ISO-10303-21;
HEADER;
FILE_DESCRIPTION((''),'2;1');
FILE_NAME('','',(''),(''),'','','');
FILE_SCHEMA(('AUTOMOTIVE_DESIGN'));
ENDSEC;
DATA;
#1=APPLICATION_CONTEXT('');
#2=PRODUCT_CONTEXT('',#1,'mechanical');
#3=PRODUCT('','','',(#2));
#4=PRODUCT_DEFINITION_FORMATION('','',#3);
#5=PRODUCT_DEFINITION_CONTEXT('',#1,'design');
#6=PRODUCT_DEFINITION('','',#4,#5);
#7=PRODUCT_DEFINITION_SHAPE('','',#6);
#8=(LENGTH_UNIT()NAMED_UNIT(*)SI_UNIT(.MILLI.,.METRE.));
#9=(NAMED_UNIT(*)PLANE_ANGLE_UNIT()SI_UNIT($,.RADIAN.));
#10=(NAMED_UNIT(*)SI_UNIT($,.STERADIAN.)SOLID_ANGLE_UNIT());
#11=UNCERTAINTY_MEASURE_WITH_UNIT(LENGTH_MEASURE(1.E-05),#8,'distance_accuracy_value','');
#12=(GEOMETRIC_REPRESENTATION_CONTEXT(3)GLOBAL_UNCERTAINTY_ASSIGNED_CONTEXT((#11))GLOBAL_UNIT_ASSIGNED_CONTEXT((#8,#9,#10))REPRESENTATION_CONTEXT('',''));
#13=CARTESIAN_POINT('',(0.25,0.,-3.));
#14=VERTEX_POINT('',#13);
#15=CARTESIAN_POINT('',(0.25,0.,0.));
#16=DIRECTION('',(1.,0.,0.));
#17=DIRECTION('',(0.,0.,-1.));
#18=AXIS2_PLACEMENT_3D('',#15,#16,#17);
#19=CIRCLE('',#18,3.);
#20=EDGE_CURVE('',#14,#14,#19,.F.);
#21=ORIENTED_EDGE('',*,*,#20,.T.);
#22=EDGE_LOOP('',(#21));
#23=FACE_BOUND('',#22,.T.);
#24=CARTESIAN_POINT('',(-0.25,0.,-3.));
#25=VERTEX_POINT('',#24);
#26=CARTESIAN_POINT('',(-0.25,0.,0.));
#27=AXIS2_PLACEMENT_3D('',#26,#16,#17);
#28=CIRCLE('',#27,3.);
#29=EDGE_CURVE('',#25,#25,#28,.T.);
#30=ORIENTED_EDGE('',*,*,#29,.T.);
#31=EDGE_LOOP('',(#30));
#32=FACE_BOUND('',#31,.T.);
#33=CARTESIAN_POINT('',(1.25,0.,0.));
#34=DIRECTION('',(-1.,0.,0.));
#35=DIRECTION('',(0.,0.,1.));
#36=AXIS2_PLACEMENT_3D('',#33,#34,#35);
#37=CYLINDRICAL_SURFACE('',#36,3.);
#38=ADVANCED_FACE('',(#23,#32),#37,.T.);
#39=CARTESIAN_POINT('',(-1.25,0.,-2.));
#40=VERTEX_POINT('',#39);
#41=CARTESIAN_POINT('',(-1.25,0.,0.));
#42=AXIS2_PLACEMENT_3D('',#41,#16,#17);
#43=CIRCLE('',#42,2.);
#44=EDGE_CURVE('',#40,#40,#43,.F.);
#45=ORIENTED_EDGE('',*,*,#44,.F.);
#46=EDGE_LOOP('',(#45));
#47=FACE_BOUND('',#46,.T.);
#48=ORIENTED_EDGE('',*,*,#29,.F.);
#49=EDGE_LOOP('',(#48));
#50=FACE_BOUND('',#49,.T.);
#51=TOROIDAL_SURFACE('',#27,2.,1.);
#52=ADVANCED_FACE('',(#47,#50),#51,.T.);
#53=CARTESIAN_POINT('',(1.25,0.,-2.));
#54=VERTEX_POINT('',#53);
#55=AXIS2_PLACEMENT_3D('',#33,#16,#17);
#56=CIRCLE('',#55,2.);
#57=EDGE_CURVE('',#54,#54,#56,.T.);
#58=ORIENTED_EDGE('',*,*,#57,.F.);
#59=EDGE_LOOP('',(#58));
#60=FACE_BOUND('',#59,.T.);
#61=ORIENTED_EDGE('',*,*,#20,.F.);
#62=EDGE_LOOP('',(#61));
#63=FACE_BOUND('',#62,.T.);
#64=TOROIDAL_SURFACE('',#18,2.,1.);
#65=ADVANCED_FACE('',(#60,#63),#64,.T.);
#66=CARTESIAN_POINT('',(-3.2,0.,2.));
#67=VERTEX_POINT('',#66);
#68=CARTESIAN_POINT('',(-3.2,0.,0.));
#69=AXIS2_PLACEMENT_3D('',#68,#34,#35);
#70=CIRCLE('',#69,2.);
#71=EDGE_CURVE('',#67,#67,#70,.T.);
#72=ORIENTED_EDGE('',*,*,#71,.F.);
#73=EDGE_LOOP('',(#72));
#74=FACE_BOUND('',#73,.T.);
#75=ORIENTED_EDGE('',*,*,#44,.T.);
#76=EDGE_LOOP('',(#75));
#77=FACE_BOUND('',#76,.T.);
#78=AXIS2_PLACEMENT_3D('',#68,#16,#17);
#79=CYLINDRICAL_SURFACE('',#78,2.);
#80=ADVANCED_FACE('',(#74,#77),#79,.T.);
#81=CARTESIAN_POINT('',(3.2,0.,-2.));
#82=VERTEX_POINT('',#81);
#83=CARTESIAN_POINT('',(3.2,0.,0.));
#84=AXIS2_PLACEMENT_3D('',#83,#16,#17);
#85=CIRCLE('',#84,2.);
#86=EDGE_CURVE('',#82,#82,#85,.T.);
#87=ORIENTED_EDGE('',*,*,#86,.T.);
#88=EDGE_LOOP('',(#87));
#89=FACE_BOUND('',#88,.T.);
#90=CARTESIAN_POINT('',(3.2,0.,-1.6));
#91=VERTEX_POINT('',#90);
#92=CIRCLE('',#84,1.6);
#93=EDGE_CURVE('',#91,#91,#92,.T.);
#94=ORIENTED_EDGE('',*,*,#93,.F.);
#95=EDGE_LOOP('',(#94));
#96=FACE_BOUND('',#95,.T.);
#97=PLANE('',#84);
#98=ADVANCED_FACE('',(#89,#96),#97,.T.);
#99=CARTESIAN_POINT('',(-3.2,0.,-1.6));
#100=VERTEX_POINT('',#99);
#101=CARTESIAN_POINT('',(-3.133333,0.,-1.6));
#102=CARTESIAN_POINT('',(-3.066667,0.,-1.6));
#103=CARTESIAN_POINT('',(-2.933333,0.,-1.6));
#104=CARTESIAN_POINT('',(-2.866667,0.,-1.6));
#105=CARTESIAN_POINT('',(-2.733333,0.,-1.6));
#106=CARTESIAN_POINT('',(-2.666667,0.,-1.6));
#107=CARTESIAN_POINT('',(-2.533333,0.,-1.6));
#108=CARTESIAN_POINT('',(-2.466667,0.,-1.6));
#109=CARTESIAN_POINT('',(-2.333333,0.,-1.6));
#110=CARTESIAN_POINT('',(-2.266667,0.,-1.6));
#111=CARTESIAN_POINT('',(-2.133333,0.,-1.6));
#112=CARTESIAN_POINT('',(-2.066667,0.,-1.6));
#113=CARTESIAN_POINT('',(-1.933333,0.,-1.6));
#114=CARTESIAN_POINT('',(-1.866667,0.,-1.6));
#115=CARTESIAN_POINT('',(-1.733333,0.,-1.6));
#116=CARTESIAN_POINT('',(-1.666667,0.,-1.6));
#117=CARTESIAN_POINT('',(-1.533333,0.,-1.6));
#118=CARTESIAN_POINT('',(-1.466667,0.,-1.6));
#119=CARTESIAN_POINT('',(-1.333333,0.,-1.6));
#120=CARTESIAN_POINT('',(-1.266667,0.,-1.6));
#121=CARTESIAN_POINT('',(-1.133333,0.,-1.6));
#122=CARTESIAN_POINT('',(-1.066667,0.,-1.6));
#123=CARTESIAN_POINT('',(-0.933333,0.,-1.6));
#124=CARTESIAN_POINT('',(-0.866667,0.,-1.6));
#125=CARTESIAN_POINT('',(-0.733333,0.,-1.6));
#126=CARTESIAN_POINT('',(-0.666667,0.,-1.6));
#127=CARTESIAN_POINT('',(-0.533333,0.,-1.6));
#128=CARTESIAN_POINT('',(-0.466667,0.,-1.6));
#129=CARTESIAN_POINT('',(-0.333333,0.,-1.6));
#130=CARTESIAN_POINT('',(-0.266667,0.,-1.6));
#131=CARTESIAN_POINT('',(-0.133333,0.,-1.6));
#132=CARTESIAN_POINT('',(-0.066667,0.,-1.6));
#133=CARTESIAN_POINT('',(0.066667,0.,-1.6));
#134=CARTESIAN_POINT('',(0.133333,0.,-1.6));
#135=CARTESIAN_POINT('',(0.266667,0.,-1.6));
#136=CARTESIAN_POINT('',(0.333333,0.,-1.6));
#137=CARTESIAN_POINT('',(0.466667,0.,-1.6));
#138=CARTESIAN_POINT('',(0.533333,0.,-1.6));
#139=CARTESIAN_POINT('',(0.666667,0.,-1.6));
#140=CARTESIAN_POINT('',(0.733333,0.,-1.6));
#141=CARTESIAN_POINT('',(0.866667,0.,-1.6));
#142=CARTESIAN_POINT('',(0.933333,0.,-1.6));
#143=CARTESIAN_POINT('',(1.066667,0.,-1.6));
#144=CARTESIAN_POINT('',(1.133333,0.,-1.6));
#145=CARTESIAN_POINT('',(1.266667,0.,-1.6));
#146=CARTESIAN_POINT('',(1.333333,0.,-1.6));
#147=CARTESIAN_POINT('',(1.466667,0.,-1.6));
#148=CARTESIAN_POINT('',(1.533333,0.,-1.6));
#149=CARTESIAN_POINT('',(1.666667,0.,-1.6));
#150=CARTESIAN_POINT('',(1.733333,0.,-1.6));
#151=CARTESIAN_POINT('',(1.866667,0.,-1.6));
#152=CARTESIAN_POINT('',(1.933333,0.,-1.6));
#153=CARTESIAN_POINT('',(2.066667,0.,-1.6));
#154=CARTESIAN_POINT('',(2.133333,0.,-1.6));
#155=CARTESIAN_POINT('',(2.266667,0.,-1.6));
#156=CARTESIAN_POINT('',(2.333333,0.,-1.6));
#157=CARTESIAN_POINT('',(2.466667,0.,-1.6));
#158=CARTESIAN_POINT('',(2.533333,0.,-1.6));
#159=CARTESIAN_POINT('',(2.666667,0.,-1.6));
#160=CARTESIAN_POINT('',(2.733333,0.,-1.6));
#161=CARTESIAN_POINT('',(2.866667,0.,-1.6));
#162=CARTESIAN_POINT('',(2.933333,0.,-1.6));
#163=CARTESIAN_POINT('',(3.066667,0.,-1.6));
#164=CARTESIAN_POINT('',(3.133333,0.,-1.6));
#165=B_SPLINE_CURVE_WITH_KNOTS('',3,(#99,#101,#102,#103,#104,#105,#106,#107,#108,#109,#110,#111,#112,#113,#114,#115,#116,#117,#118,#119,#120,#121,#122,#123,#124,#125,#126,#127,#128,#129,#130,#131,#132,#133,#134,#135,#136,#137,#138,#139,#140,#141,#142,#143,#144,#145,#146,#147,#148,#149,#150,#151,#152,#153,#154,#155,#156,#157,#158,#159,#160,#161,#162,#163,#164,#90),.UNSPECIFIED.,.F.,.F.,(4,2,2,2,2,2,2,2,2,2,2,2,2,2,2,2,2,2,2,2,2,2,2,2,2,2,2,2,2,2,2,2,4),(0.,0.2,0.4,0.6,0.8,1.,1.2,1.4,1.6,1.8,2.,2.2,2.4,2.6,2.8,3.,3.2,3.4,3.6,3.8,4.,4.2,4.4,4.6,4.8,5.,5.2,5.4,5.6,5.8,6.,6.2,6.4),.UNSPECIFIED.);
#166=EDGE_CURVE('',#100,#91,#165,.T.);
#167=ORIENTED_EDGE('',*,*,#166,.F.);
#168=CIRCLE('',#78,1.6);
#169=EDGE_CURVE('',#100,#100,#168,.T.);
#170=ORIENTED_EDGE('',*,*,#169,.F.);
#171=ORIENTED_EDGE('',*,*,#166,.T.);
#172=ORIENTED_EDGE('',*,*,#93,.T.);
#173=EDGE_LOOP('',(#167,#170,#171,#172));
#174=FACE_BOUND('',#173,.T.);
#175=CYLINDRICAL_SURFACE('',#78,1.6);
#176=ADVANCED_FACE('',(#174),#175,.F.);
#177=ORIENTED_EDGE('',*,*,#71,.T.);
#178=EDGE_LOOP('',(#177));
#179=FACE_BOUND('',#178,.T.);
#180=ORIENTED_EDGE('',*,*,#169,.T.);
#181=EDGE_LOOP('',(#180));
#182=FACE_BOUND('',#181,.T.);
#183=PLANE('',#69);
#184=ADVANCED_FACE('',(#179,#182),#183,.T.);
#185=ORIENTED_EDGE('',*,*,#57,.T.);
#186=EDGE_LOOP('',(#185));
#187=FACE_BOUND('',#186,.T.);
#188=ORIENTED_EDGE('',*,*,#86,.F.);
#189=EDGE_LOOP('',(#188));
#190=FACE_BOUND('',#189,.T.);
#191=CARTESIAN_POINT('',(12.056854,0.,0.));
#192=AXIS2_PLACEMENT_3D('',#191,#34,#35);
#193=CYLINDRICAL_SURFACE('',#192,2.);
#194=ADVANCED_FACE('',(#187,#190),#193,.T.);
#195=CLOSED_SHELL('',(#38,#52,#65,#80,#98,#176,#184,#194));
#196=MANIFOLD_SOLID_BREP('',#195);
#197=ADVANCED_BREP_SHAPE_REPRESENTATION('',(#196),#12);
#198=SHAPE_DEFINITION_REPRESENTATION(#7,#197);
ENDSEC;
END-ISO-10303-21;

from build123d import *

# Parameters (mm, degrees)
SKETCH1_R           = 3
BOSS_EXTRUDE1_DEPTH = 1.25
SKETCH2_R           = 2
BOSS_EXTRUDE2_DEPTH = 1.95
BOSS_EXTRUDE8_START = 1.95
SKETCH3_R           = 2
BOSS_EXTRUDE8_DEPTH = 1.95
SKETCH4_R           = 1.6
CUT_EXTRUDE1_DEPTH  = 8.678541528
FILLET1_R           = 1


with BuildPart() as part:
    # Sketch1 → Boss-Extrude1 (new, symmetric)
    with BuildSketch(Plane(origin=(0, 0, 0), x_dir=(0, 0, -1), z_dir=(1, 0, 0))):
        Circle(SKETCH1_R)
    extrude(amount=BOSS_EXTRUDE1_DEPTH, both=True)

    # Sketch2 → Boss-Extrude2 (add)
    with BuildSketch(Plane(origin=(1.25, 0, 0), x_dir=(0, 0, -1), z_dir=(1, 0, 0))):
        Circle(SKETCH2_R)
    extrude(amount=BOSS_EXTRUDE2_DEPTH)

    # Sketch3 → Boss-Extrude8 (add)
    with BuildSketch(Plane.ZY.offset(1.25).offset(BOSS_EXTRUDE8_START)):
        with Locations(Location((0, 0, 0), (0, 0, 180))):
            Circle(SKETCH3_R)
    extrude(amount=-BOSS_EXTRUDE8_DEPTH)

    # Sketch4 → Cut-Extrude1 (cut, through all)
    with BuildSketch(Plane(origin=(3.2, 0, 0), x_dir=(0, 0, -1), z_dir=(1, 0, 0))):
        Circle(SKETCH4_R)
    extrude(amount=-CUT_EXTRUDE1_DEPTH, mode=Mode.SUBTRACT)

    # Fillet1
    fillet1_edges = [part.edges().sort_by_distance(p)[0] for p in [
        (-1.25, 0, 3),
        (1.25, 0, 3),
    ]]
    fillet(fillet1_edges, radius=FILLET1_R - 0.0001)  # a hair under: the kernel refuses the full size


solid = part.part
